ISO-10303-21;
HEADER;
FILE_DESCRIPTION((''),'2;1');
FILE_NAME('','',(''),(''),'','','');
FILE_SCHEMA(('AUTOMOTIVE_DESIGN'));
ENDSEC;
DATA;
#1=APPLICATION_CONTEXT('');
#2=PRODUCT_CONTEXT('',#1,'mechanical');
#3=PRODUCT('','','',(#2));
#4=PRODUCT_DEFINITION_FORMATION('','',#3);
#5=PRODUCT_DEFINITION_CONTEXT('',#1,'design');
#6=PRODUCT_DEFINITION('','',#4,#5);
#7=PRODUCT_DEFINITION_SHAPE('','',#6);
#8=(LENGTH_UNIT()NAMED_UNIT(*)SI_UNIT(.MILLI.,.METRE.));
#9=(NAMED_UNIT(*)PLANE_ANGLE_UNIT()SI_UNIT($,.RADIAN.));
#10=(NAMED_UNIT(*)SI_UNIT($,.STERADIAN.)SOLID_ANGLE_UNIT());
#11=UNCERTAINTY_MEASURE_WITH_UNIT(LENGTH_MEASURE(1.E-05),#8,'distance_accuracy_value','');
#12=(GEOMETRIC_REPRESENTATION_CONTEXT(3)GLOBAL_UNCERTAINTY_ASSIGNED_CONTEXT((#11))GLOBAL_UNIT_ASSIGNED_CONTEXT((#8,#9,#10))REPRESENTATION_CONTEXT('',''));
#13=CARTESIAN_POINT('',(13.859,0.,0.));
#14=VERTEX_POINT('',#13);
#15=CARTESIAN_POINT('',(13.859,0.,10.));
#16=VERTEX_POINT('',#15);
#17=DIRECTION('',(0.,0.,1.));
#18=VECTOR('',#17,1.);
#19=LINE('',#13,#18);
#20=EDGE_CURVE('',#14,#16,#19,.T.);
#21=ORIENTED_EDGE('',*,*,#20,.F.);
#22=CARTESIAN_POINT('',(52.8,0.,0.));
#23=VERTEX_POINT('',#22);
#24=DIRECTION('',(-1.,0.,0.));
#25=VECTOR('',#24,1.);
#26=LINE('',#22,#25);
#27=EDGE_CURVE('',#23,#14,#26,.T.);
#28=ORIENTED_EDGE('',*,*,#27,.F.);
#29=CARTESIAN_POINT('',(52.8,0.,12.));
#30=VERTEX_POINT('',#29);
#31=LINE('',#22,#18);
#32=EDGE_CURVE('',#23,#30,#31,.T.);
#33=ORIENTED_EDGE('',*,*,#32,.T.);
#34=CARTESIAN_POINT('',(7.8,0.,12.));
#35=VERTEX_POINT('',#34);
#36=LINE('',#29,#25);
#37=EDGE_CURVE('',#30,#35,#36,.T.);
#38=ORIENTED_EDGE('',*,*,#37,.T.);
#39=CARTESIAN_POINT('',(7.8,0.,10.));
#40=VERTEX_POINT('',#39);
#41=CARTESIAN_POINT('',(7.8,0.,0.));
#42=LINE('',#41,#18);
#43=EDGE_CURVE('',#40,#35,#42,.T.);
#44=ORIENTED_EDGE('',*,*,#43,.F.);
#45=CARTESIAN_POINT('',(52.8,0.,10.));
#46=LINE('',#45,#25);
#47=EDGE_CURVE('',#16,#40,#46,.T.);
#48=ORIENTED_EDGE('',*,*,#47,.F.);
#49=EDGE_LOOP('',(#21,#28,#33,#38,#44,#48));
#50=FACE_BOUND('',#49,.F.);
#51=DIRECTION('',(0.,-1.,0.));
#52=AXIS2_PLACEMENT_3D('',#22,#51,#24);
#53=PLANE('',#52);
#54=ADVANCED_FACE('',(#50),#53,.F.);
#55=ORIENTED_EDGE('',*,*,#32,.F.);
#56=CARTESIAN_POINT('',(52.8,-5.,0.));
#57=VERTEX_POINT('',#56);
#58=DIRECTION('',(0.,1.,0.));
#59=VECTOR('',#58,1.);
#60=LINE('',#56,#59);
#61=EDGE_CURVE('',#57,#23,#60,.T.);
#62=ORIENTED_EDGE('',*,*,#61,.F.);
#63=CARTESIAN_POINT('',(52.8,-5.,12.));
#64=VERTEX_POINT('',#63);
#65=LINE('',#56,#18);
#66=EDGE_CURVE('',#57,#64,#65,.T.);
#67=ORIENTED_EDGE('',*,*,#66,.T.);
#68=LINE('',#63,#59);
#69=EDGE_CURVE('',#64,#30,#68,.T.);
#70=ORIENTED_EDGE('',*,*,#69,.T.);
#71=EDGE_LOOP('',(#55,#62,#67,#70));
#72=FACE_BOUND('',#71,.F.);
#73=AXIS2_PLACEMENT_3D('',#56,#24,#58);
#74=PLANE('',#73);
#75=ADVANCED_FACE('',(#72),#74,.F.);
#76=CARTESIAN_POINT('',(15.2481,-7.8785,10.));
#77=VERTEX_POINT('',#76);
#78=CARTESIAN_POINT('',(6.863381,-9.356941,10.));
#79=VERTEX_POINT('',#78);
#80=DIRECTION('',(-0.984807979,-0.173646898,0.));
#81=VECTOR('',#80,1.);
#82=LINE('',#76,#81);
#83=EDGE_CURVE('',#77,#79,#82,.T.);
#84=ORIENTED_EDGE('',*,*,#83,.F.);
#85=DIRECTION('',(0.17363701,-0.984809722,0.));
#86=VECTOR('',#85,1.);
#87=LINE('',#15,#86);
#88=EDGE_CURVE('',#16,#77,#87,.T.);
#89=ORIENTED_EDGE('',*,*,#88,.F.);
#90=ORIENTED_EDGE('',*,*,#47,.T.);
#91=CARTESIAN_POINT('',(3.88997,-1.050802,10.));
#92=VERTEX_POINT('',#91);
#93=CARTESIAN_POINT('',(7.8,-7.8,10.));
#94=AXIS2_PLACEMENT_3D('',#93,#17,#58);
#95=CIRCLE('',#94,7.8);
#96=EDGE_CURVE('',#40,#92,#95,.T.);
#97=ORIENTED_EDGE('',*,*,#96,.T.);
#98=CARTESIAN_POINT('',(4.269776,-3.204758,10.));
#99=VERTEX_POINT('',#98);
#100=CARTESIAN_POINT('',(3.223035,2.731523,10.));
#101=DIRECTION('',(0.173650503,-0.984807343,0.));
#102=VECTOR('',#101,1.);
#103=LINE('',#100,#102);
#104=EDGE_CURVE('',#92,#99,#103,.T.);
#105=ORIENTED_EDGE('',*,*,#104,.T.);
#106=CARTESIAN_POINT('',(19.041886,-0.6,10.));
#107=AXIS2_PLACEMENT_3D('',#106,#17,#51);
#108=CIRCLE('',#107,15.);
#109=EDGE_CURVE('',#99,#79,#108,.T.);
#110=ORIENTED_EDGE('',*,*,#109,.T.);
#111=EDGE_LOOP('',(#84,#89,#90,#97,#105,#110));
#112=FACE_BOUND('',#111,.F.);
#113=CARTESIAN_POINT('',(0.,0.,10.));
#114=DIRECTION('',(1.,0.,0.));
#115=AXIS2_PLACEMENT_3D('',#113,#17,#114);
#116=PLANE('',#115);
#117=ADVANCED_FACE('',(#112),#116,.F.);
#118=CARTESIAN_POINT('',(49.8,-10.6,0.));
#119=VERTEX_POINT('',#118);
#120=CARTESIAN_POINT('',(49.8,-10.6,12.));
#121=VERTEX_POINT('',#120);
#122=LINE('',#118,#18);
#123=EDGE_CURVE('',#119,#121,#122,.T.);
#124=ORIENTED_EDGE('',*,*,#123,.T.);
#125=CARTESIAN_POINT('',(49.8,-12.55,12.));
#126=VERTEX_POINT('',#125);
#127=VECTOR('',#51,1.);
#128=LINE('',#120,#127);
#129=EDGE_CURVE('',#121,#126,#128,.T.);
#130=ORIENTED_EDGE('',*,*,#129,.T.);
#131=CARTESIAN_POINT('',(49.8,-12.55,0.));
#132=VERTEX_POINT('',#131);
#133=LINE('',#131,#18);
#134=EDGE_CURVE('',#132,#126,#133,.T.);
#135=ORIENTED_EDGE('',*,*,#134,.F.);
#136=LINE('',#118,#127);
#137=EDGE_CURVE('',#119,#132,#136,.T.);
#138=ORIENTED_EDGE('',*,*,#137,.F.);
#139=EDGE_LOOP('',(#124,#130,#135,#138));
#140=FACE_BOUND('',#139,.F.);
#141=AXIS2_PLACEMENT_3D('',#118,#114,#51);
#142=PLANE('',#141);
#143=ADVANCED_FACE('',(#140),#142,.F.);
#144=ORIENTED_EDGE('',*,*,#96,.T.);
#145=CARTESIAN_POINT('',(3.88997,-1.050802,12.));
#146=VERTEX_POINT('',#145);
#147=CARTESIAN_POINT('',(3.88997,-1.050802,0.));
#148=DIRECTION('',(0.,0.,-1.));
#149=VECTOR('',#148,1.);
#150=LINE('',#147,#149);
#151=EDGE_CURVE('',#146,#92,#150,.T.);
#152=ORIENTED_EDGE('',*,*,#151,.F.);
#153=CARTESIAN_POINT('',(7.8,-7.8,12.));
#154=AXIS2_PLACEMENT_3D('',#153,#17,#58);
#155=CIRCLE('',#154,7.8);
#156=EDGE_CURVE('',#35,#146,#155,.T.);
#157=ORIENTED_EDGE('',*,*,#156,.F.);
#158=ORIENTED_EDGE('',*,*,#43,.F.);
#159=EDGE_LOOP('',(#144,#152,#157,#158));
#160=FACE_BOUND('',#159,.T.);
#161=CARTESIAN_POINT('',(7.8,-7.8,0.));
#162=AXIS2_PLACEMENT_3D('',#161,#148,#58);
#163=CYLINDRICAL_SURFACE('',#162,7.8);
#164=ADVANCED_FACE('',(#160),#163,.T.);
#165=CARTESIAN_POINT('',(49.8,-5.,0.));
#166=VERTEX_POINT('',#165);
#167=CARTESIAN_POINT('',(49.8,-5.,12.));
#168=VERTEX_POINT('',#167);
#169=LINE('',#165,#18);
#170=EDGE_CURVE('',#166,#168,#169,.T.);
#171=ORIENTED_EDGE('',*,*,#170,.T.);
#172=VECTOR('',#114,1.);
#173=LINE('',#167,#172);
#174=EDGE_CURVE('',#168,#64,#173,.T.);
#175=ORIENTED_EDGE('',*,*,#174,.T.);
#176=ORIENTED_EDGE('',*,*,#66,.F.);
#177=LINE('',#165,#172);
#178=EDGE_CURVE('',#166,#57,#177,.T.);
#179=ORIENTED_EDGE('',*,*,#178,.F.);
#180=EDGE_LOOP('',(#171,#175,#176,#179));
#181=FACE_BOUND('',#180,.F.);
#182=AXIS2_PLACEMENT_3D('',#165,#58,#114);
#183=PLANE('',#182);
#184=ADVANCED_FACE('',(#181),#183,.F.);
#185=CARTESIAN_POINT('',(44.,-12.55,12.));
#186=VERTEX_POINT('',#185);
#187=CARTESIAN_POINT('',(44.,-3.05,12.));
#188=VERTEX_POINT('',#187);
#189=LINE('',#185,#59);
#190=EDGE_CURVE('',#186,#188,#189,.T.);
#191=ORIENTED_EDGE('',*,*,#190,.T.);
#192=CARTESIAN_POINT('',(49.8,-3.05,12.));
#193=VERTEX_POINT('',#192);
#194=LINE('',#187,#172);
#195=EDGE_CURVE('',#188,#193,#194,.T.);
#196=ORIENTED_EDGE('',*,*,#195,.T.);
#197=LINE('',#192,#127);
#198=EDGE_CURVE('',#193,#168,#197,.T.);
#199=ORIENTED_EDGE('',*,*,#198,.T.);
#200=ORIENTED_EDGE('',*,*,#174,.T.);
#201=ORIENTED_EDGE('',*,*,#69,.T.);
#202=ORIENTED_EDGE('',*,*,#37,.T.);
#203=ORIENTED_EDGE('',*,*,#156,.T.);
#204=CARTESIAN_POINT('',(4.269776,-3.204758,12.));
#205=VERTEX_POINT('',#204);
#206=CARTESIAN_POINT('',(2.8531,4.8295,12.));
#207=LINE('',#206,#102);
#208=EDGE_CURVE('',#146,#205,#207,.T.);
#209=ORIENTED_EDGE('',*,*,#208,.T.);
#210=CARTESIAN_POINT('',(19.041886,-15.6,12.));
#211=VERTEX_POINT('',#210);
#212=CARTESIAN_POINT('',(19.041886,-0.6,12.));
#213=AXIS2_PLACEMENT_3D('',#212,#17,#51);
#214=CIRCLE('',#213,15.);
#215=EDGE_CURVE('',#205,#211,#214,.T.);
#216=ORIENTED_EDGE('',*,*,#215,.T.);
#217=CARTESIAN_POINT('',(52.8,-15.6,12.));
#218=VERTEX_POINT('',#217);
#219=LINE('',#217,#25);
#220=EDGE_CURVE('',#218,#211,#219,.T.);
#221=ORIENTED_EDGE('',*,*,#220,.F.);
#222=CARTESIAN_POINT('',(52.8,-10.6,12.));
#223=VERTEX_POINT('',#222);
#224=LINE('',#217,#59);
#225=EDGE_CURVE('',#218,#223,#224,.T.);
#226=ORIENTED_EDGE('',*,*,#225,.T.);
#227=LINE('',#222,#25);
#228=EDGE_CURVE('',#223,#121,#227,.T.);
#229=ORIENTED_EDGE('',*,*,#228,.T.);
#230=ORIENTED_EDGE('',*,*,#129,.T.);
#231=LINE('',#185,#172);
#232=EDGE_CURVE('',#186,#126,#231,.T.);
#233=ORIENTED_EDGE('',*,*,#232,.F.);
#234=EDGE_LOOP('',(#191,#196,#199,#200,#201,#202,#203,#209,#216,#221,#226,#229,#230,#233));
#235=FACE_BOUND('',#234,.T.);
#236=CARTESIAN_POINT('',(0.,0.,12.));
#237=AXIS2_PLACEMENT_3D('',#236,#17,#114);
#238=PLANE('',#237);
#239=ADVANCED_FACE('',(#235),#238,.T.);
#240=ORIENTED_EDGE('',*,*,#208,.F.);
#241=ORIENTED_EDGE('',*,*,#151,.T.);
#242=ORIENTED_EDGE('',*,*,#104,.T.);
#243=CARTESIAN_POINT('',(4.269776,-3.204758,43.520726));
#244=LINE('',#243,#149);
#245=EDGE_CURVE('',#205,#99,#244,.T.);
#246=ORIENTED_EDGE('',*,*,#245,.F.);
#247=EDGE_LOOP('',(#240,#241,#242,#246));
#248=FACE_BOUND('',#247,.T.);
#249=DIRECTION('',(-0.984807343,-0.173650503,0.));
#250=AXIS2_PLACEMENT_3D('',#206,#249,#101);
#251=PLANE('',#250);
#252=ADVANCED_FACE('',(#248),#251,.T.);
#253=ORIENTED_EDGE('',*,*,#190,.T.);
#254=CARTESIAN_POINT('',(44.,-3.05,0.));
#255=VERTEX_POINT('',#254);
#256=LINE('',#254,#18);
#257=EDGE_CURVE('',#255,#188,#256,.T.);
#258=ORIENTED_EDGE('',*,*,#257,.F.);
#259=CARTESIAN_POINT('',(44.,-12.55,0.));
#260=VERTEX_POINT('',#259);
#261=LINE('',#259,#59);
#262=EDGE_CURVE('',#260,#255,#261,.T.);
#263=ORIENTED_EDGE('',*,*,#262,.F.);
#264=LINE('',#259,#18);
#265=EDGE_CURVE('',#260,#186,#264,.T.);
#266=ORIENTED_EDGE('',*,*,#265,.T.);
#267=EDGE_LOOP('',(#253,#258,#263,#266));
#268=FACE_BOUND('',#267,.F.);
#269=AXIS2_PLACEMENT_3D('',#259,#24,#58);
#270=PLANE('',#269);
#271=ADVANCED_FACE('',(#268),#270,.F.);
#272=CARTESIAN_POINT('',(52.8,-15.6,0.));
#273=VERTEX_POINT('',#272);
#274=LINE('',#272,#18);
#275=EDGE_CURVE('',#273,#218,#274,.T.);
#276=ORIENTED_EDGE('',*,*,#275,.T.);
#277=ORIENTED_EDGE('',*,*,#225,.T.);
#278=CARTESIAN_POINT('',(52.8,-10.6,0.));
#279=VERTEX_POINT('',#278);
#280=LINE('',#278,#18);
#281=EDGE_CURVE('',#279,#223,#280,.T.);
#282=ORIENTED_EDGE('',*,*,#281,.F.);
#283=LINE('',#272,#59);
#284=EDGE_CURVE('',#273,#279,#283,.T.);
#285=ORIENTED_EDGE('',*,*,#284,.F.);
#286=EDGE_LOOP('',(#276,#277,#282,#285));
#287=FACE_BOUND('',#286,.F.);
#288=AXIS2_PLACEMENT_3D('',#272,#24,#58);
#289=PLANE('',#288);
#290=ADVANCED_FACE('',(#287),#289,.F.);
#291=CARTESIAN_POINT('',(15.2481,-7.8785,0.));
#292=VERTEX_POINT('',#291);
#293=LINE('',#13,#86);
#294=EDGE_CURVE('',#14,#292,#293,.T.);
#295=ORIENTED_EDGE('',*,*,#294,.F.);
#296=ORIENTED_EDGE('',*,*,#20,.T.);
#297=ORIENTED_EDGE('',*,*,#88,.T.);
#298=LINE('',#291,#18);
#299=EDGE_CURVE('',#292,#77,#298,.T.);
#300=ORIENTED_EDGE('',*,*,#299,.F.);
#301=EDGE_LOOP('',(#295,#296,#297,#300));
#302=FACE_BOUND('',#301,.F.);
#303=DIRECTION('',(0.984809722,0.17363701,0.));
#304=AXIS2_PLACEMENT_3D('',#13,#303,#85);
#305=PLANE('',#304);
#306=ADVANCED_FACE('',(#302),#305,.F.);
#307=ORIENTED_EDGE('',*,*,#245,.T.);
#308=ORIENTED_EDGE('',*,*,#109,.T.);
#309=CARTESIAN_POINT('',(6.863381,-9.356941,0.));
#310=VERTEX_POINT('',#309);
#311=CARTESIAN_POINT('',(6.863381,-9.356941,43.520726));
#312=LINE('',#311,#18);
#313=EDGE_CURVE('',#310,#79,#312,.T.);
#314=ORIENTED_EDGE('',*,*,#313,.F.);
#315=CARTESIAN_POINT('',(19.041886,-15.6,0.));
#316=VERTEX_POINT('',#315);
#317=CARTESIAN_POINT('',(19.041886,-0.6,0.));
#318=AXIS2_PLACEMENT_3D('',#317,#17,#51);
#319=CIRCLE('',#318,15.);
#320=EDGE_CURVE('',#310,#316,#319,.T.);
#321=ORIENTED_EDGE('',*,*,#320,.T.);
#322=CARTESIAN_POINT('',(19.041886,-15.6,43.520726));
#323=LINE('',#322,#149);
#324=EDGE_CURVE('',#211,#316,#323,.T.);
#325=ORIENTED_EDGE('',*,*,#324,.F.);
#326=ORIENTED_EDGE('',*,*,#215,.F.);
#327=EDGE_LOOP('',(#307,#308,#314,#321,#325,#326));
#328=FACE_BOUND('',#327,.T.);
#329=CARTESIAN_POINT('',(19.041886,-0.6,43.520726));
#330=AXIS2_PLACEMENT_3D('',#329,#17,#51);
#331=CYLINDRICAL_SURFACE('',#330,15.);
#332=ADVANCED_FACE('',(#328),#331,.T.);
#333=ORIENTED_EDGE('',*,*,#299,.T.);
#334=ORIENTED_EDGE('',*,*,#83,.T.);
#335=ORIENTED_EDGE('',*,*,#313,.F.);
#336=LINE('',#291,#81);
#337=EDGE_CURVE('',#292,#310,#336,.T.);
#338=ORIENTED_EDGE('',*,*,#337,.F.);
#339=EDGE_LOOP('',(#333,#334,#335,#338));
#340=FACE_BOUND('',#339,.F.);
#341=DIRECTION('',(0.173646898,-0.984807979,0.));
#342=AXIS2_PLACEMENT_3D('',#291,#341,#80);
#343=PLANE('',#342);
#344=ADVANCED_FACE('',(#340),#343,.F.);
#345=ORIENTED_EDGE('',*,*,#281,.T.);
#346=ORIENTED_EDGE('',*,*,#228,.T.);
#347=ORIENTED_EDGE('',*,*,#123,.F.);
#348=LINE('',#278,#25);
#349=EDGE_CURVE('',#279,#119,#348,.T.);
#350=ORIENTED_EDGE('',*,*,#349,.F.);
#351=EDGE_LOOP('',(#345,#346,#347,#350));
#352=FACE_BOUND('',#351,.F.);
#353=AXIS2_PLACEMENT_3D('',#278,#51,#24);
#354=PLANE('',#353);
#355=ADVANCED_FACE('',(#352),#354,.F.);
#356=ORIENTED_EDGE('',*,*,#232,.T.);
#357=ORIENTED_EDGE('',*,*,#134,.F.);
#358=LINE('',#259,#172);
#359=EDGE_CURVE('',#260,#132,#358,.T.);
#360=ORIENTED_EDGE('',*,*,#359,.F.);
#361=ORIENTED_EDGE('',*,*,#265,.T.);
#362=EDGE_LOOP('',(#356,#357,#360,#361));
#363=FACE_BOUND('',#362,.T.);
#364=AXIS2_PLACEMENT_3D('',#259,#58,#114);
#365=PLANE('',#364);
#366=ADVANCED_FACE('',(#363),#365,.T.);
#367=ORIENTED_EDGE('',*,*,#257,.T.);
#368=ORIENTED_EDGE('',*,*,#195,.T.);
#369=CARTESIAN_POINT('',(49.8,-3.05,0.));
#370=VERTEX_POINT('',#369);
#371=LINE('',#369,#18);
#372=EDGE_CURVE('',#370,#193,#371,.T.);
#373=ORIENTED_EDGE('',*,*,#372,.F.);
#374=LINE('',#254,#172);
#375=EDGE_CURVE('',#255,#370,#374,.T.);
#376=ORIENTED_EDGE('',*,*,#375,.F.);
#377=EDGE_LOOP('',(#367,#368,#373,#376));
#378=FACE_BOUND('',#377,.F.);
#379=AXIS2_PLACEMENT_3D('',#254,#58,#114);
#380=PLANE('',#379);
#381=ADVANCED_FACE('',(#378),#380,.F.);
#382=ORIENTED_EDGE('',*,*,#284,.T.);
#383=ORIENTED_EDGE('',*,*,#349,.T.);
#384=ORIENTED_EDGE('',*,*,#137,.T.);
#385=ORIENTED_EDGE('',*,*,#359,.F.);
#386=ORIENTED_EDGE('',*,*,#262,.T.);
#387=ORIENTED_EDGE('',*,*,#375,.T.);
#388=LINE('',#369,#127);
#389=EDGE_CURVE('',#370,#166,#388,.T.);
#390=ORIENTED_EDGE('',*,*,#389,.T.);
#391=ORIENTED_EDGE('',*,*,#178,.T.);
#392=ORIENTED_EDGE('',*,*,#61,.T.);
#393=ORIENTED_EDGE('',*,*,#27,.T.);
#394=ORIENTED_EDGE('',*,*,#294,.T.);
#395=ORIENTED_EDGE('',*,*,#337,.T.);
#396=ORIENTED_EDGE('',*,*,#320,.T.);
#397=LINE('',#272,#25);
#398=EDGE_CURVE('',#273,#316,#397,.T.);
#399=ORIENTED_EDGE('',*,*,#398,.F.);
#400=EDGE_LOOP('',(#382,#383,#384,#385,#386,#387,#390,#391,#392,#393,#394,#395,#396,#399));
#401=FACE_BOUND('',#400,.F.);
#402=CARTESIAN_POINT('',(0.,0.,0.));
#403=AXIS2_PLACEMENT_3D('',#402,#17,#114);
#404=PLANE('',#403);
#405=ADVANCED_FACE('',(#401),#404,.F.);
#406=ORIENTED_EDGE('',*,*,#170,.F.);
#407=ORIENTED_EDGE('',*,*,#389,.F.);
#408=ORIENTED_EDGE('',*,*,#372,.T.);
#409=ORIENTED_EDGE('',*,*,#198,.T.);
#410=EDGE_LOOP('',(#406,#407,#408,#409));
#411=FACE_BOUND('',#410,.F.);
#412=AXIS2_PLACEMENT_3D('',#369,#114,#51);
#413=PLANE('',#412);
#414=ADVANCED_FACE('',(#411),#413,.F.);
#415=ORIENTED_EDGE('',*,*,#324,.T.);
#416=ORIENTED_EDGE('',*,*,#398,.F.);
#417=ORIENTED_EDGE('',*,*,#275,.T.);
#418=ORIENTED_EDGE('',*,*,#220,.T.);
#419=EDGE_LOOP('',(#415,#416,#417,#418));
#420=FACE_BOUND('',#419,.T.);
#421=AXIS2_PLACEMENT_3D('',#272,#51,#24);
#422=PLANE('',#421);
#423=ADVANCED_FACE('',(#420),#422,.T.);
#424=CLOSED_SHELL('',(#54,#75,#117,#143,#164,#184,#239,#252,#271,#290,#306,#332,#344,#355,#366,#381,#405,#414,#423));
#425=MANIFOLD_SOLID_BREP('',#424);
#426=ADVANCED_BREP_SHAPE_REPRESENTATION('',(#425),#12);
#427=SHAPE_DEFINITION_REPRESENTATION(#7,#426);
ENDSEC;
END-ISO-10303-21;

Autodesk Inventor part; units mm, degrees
ref_plane "YZ Plane" through (0, 0, 0) normal (1, 0, 0) x (0, 1, 0)
ref_plane "XZ Plane" through (0, 0, 0) normal (0, 1, 0) x (-1, 0, 0)
ref_plane "XY Plane" through (0, 0, 0) normal (0, 0, 1) x (1, 0, 0)
sketch "Sketch5" plane through (0, 0, 0) normal (0, 0, 1) x (1, 0, 0)
  line L0 (52.8, -15.6) -> (52.8, -10.6)
  line L1 (52.8, -10.6) -> (49.8, -10.6)
  line L2 (49.8, -10.6) -> (49.8, -12.55)
  line L3 (44, -12.55) -> (44, -3.05)
  line L4 (49.8, -3.05) -> (49.8, -5)
  line L5 (49.8, -5) -> (52.8, -5)
  line L6 (52.8, -5) -> (52.8, 0)
  line L7 (52.8, 0) -> (7.8, 0)
  line L8 (44, -3.05) -> (49.8, -3.05)
  line L9 (44, -12.55) -> (49.8, -12.55)
  line L10 (52.8, -15.6) -> (7.8, -15.6)
  arc A0 (7.8, 0) -> (7.8, -15.6) centre (7.8, -7.8) ccw
  point P0 (0, 0)
  dimension "d41" = 5.8
  dimension "d48" = 44
  dimension "d50" = 3
  dimension "d63" = 45
  dimension "d67" = 15.6
  dimension "d71" = 0
  dimension "d72" = 36.2
  dimension "d87" = 5.6
  dimension "d88" = 9.5
extrude "Extrusion2" add sketch "Sketch5" along normal blind 12
sketch "Sketch11" plane through (0, 0, 12) normal (0, 0, 1) x (1, 0, 0)
  line L0 (52.8, 0) -> (7.8, 0) projected
  line L1 (13.859, 0) -> (15.2481, -7.8785)
  line L2 (15.2481, -7.8785) -> (0.476, -10.4832)
  arc A0 (7.8, 0) -> (7.8, -15.6) centre (7.8, -7.8) ccw projected
  point P0 (0, 0)
  dimension "d95" = 100
  dimension "d96" = 8
  dimension "d97" = 15
extrude "Extrusion7" cut sketch "Sketch11" along normal blind 10 from surface at -12
sketch "Sketch14" plane through (0, 0, 12) normal (0, 0, 1) x (1, 0, 0)
  line L0 (2.8531, 4.8295) -> (7.1439, -19.5045)
  line L1 (7.1439, -19.5045) -> (-13.8708, -23.21)
  line L2 (-13.8708, -23.21) -> (-18.1616, 1.124)
  line L3 (-18.1616, 1.124) -> (2.8531, 4.8295)
  line L4 (13.859, 0) -> (15.2481, -7.8785) projected
  point P0 (0, 0)
  dimension "d111" = 10
extrude "Extrusion10" cut sketch "Sketch14" against normal through all
fillet "Fillet2" radius 15 1 edges at (6.4341, -15.4795, 6)
equation "\"l1\" = 8"
properties part number "Finray_test_8_Kerbe_10deg_V4"
